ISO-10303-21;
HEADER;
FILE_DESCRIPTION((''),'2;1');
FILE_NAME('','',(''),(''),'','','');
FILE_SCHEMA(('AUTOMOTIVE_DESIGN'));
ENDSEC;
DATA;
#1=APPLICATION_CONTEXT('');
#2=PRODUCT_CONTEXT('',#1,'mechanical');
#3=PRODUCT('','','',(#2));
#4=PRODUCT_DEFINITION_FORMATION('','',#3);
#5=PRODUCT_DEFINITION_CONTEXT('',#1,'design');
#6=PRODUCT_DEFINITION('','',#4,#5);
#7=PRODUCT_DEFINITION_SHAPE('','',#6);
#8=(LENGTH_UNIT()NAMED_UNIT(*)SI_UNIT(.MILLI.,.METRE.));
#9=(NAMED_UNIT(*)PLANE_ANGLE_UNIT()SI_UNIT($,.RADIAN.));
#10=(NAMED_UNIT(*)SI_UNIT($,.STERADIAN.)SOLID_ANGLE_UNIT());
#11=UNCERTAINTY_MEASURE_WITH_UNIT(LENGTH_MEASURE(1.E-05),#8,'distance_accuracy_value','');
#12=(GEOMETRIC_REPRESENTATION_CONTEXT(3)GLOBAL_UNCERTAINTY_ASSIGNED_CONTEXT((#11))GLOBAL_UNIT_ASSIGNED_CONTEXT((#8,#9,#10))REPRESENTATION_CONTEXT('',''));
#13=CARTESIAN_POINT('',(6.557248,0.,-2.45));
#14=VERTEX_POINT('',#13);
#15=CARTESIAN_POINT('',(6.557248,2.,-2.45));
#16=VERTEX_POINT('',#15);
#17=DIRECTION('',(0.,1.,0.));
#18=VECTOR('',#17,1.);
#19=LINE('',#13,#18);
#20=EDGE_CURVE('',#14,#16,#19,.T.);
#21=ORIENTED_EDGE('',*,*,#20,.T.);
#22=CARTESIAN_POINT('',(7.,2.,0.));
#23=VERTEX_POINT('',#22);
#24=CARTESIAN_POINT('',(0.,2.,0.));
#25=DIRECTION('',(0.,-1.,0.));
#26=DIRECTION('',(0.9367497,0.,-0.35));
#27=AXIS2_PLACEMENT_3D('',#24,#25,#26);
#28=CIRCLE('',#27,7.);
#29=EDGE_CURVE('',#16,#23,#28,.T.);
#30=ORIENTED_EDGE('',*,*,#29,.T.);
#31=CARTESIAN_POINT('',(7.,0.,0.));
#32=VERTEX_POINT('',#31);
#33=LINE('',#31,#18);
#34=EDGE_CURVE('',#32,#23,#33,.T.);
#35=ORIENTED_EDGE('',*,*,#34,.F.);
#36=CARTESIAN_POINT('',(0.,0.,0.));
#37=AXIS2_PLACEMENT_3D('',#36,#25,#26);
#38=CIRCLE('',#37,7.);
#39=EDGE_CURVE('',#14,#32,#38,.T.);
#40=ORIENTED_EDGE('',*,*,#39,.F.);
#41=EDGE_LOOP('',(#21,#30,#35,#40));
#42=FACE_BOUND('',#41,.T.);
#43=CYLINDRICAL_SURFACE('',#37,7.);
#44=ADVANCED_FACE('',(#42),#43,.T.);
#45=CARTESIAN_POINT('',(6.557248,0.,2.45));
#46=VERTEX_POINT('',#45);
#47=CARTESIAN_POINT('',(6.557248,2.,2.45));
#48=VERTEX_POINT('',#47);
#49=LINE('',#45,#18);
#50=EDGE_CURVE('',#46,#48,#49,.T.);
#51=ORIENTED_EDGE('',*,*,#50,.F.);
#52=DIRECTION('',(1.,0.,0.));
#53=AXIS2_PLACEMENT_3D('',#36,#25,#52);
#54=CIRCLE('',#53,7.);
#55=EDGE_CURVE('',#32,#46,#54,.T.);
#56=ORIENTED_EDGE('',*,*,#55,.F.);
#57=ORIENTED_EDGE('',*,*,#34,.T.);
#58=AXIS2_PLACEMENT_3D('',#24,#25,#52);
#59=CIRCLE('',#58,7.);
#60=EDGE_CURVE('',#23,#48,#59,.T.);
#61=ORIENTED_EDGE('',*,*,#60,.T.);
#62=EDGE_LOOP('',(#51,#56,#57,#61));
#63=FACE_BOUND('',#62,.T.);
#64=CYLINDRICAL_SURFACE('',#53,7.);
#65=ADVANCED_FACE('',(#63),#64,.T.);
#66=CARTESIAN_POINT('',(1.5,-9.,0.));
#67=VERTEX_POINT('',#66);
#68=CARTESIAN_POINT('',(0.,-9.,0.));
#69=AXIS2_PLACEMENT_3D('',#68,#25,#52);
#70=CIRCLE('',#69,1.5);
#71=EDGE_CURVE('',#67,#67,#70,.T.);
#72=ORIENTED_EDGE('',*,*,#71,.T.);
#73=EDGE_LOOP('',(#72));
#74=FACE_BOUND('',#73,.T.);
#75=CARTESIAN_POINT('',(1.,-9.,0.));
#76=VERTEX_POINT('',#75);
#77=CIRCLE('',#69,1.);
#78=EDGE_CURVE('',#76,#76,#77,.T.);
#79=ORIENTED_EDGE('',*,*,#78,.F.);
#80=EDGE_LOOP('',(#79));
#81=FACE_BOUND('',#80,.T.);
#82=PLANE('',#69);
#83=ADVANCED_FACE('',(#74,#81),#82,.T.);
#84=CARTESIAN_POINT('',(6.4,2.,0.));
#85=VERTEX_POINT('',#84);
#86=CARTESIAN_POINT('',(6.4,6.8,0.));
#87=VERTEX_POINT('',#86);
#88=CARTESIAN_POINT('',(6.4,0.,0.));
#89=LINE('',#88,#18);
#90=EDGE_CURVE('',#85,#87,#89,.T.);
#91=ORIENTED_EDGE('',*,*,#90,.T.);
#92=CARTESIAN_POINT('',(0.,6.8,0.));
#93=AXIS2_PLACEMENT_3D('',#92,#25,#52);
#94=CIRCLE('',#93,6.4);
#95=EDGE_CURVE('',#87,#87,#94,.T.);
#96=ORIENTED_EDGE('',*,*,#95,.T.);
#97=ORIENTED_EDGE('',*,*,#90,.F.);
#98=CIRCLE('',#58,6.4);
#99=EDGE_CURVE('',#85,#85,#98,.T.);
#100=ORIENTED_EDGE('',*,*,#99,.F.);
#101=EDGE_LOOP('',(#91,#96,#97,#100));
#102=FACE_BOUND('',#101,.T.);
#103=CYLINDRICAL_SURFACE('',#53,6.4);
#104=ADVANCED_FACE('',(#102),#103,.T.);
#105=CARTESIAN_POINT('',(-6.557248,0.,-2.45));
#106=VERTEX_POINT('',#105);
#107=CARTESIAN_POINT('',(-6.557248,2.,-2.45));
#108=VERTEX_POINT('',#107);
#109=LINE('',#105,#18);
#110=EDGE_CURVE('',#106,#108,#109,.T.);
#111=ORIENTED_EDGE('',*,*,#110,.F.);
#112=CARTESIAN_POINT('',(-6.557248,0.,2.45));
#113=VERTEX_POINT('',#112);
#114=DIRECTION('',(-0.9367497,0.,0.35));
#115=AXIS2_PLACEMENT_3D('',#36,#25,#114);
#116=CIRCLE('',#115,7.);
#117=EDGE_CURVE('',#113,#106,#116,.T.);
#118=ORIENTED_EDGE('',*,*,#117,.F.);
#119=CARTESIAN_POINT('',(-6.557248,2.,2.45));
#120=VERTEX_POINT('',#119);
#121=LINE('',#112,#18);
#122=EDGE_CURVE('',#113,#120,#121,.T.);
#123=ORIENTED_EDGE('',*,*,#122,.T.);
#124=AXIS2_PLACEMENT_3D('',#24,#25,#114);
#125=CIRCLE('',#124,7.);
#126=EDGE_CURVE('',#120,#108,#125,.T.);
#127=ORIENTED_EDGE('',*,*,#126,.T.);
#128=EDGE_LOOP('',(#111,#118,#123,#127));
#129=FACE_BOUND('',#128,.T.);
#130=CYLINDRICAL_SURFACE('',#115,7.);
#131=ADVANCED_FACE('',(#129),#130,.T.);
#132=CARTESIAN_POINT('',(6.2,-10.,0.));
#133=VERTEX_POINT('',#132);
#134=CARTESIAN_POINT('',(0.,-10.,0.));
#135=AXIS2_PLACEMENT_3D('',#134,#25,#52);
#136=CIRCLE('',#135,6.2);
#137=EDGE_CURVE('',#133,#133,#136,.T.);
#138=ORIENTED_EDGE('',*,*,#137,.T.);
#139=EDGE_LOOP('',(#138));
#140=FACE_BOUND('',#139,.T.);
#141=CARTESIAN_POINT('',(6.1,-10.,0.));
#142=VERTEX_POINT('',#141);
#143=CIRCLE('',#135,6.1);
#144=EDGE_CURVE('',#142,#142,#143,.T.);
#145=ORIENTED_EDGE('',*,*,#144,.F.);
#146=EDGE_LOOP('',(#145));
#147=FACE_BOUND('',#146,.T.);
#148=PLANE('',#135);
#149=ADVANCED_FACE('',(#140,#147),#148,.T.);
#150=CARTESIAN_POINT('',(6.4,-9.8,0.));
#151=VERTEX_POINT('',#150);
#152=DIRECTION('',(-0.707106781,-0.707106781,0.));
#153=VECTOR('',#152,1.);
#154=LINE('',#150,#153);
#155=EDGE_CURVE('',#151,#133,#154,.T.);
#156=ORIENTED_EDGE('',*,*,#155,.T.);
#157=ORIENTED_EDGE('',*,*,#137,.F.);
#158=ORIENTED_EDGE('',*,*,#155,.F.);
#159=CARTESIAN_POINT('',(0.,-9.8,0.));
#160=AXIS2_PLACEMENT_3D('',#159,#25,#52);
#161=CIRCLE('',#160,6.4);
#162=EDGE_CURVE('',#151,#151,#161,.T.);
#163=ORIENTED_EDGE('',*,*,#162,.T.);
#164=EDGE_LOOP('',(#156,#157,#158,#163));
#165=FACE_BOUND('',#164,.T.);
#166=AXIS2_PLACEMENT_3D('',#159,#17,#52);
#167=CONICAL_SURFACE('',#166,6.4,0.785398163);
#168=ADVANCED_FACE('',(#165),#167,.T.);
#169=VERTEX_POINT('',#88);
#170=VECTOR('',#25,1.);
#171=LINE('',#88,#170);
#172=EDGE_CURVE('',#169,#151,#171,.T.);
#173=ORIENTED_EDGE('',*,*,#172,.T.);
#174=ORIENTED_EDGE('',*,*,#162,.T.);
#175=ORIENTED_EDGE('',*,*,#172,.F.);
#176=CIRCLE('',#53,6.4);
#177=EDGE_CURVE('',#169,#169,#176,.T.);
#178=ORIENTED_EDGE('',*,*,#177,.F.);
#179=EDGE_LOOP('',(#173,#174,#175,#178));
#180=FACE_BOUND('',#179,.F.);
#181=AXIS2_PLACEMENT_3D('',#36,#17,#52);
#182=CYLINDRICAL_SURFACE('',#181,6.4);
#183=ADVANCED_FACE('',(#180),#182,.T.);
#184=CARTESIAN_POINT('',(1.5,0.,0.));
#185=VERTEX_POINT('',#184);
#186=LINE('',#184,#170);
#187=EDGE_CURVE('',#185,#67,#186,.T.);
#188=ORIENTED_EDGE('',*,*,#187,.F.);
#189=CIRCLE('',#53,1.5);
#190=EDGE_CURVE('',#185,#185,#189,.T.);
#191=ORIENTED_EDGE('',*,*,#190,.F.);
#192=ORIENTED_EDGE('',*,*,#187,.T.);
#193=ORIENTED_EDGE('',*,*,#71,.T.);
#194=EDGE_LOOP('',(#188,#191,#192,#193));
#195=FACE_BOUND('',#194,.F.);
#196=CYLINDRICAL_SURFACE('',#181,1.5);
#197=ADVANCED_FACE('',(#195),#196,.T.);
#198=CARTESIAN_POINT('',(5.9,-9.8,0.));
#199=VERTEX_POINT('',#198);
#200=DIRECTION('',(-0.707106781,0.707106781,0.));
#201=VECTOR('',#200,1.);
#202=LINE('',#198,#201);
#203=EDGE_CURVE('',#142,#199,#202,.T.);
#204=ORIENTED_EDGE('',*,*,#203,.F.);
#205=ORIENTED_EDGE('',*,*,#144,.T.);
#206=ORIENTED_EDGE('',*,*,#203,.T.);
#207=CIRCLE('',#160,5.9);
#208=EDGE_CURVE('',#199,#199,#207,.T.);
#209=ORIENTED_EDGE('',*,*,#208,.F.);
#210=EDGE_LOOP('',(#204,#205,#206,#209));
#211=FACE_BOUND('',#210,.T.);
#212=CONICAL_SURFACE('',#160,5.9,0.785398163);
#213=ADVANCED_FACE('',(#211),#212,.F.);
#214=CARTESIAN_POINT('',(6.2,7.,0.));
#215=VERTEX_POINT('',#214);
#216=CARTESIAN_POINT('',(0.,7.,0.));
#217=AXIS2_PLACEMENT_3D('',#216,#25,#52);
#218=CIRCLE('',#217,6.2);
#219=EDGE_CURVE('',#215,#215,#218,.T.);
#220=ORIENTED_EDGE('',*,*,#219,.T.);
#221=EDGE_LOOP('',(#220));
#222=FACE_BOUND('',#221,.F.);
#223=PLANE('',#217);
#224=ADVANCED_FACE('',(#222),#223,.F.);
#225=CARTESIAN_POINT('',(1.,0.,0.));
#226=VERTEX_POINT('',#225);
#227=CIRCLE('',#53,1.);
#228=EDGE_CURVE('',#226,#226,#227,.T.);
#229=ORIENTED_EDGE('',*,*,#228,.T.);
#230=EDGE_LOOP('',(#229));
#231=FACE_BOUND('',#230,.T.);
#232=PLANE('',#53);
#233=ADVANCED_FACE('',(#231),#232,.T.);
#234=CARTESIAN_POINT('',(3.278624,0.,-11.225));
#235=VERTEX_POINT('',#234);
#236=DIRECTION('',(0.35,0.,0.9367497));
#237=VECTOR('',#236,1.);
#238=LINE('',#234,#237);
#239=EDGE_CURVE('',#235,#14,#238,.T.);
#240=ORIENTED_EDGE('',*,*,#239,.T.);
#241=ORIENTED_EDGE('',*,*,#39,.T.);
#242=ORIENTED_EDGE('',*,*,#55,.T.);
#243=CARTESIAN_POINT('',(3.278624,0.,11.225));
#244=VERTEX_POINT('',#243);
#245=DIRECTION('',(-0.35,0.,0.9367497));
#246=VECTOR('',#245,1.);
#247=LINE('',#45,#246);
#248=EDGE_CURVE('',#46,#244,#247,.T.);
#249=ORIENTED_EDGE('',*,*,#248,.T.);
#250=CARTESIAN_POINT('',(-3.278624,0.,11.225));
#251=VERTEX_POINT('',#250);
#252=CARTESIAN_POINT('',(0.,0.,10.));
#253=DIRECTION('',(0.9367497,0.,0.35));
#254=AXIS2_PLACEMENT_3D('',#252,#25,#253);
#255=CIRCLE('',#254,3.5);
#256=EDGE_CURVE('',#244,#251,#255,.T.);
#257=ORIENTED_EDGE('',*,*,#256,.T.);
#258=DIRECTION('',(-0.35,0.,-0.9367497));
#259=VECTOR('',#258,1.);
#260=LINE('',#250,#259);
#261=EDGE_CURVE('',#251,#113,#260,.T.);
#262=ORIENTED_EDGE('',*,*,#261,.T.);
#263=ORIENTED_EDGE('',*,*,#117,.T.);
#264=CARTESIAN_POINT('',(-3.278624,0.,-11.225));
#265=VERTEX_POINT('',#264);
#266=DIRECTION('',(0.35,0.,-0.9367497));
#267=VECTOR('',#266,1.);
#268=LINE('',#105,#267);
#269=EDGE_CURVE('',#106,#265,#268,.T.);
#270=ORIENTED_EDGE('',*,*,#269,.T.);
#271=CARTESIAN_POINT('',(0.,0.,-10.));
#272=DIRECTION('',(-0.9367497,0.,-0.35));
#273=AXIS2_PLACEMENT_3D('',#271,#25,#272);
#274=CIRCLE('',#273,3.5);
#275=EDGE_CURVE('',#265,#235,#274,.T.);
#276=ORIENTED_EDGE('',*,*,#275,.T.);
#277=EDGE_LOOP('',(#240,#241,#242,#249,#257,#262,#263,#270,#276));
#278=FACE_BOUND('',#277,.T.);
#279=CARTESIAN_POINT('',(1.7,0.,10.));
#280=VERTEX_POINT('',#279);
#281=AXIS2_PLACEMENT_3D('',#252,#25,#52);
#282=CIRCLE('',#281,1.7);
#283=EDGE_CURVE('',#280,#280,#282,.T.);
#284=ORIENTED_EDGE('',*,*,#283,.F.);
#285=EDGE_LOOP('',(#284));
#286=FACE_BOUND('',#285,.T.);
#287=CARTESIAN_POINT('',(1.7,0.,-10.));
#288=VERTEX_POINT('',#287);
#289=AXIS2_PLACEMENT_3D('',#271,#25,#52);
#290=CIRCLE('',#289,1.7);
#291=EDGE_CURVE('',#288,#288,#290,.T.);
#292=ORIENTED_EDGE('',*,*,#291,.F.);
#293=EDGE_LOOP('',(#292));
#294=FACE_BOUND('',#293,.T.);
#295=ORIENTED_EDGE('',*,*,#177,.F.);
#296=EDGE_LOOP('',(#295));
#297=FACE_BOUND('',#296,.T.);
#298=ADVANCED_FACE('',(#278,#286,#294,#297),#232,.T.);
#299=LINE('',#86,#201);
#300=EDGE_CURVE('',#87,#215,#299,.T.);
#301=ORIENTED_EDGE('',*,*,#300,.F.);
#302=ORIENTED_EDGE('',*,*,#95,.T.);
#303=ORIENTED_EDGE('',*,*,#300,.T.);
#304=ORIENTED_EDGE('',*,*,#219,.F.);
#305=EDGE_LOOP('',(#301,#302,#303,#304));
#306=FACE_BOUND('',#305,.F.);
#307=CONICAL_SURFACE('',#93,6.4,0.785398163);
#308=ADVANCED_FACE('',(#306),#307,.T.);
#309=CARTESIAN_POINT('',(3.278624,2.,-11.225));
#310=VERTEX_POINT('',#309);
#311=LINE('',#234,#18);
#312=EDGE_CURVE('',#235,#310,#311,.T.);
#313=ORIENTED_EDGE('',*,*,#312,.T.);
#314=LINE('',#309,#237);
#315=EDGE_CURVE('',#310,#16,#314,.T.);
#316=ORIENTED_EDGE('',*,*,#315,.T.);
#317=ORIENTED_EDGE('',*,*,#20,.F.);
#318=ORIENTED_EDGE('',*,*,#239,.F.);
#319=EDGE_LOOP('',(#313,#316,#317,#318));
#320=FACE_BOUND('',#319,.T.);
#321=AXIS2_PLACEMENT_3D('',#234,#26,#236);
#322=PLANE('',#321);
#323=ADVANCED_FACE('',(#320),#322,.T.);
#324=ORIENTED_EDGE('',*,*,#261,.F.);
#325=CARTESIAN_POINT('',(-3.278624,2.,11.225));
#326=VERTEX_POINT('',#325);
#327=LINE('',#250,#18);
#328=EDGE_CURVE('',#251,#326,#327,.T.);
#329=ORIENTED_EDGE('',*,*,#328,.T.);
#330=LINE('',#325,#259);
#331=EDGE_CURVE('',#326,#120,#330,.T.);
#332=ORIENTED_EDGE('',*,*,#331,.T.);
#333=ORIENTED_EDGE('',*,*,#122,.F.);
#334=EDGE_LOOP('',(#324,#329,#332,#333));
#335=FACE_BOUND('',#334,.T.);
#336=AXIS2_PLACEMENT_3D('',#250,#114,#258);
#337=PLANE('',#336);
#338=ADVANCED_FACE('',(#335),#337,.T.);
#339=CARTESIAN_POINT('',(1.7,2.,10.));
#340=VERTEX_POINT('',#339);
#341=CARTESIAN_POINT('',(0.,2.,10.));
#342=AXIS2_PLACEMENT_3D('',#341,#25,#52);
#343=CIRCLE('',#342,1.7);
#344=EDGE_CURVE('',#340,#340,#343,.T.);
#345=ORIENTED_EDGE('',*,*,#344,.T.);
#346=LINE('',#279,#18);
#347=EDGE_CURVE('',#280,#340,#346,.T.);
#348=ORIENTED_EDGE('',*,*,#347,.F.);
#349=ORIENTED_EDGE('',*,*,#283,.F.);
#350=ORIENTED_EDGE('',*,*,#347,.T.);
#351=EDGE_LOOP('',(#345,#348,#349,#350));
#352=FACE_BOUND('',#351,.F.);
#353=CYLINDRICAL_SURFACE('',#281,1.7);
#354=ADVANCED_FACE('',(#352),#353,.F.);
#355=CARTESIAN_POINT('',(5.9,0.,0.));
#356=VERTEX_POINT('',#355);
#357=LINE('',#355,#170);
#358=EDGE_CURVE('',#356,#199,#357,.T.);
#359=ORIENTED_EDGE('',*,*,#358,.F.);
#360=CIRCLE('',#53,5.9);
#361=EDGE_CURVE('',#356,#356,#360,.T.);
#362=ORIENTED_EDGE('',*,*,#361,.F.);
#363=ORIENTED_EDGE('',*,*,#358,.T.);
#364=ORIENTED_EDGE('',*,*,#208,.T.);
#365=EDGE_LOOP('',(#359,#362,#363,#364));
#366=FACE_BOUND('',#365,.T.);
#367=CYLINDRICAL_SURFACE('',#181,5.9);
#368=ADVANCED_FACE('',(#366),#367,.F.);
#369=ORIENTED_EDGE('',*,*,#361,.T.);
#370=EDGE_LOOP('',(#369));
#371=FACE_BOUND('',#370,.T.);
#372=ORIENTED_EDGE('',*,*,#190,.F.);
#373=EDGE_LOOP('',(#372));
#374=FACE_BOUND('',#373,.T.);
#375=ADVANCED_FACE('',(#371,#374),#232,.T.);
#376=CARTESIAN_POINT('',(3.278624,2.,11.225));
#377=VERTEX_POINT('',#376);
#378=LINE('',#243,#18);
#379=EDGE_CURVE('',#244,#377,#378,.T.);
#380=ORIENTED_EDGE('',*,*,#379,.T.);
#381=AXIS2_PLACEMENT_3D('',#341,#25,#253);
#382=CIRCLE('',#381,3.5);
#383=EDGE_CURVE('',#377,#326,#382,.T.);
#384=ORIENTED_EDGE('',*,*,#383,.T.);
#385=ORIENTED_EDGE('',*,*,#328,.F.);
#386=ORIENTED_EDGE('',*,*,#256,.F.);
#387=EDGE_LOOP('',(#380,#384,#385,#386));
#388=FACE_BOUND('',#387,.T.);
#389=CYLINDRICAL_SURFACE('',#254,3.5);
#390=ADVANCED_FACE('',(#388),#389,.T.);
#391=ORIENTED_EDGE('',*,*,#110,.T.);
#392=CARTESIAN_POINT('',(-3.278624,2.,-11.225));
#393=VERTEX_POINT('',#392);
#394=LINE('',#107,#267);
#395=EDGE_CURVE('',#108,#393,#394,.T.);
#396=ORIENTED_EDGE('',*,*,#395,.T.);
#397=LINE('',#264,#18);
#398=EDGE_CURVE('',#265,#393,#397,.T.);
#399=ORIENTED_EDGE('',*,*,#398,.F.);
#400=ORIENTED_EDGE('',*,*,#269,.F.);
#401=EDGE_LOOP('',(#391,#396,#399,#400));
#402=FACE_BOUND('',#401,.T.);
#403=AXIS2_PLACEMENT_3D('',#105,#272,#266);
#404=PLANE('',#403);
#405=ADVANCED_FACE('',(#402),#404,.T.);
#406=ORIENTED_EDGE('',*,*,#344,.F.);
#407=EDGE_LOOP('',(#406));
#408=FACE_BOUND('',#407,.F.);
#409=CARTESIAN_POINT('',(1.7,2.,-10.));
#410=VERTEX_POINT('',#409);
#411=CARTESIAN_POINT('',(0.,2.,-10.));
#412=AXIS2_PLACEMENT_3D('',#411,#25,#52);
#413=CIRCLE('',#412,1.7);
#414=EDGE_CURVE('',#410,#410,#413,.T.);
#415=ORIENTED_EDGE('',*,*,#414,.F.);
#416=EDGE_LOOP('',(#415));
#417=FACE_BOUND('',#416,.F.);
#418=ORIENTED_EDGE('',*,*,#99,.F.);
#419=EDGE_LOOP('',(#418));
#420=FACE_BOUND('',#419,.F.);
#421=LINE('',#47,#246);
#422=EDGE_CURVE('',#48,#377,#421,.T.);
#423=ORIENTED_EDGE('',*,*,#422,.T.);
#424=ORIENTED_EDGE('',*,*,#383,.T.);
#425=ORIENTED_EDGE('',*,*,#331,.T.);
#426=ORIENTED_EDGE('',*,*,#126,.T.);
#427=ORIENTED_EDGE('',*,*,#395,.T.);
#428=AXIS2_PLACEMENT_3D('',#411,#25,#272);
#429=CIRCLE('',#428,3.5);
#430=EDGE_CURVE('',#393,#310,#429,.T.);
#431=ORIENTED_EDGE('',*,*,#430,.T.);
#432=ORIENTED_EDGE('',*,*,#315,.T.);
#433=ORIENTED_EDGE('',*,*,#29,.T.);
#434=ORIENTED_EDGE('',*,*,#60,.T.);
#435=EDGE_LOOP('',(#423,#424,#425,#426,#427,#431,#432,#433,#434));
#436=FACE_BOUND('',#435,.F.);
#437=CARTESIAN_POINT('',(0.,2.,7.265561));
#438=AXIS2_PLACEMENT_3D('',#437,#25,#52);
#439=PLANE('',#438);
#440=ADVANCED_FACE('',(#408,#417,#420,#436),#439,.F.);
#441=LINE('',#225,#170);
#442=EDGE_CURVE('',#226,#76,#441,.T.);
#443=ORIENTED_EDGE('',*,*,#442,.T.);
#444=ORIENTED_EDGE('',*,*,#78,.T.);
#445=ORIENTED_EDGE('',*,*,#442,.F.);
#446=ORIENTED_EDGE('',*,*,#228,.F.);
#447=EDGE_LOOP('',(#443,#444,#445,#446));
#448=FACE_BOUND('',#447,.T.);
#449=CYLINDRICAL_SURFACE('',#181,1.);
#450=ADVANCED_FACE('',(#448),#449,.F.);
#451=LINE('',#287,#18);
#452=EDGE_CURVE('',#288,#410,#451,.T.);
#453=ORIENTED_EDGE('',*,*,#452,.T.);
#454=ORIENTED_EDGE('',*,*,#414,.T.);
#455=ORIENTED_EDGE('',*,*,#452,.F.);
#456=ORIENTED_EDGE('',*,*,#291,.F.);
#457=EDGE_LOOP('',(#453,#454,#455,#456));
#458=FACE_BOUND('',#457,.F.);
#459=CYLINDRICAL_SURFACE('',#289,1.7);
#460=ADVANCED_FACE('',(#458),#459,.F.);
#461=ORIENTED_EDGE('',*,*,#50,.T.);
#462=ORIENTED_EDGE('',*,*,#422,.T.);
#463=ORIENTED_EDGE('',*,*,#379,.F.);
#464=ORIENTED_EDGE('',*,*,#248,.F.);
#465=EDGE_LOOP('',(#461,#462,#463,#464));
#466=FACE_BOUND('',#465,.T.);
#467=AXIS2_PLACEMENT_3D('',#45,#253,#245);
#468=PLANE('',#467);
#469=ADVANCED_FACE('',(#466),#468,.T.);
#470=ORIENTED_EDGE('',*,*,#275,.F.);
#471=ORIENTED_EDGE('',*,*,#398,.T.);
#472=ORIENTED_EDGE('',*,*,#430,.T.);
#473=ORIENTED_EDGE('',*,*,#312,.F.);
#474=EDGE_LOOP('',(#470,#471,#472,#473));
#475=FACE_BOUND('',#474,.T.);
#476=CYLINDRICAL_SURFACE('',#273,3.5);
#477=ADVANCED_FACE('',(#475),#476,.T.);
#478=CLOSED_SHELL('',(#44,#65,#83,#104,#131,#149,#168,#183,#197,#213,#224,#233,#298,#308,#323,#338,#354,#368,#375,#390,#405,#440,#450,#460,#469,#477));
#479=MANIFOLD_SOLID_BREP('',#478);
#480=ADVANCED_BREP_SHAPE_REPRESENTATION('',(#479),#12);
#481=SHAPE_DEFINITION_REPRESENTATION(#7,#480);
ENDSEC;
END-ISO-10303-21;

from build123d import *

# Parameters (mm, degrees)
F0_R     = 1.7
F0_R_2   = 6.4
F0_R_3   = 5.9
F0_R_4   = 1.5
F0_R_5   = 1
F1_DEPTH = 2
F2_DEPTH = 7
F3_DEPTH = 10
F4_DEPTH = 9
F6_SIZE  = 0.2


# Not quite as in the source:
# - the program builds the solid bodies; features that only make, move or delete a surface that nothing else refers to are left out


with BuildPart() as f1:
    # F0 (on Front) → F1 (new body)
    with BuildSketch(Plane.XZ):
        with BuildLine():
            Line((6.5572478983, 2.45), (3.2786239492, 11.225))
            ThreePointArc((3.2786239492, 11.225), (0, 13.5), (-3.2786239492, 11.225))
            Line((-3.2786239492, 11.225), (-6.5572478983, 2.45))
            ThreePointArc((-6.5572478983, 2.45), (0, 7), (6.5572478983, 2.45))
        make_face()
        with Locations((0, 10)):
            Circle(F0_R, mode=Mode.SUBTRACT)
        with BuildLine():
            ThreePointArc((6.5572478983, -2.45), (0, -7), (-6.5572478983, -2.45))
            Line((-6.5572478983, -2.45), (-3.2786239492, -11.225))
            ThreePointArc((-3.2786239492, -11.225), (0, -13.5), (3.2786239492, -11.225))
            Line((3.2786239492, -11.225), (6.5572478983, -2.45))
        make_face()
        with Locations((0, -10)):
            Circle(F0_R, mode=Mode.SUBTRACT)
        with BuildLine():
            ThreePointArc((7, 0), (6.8884227254, 1.2448423016), (6.5572478983, 2.45))
            ThreePointArc((6.5572478983, 2.45), (0, 7), (-6.5572478983, 2.45))
            ThreePointArc((-6.5572478983, 2.45), (-7, 0), (-6.5572478983, -2.45))
            ThreePointArc((-6.5572478983, -2.45), (0, -7), (6.5572478983, -2.45))
            ThreePointArc((6.5572478983, -2.45), (6.8884227254, -1.2448423016), (7, 0))
        make_face()
        Circle(F0_R_2, mode=Mode.SUBTRACT)
        Circle(F0_R_2)
        Circle(F0_R_3, mode=Mode.SUBTRACT)
        Circle(F0_R_3)
        Circle(F0_R_4, mode=Mode.SUBTRACT)
        Circle(F0_R_4)
        Circle(F0_R_5, mode=Mode.SUBTRACT)
        Circle(F0_R_5)
    extrude(amount=-F1_DEPTH)

    # F0 (on Front) → F2 (join)
    with BuildSketch(Plane.XZ):
        Circle(F0_R_2)
        Circle(F0_R_3, mode=Mode.SUBTRACT)
        Circle(F0_R_3)
        Circle(F0_R_4, mode=Mode.SUBTRACT)
        Circle(F0_R_4)
        Circle(F0_R_5, mode=Mode.SUBTRACT)
        Circle(F0_R_5)
    extrude(amount=-F2_DEPTH)

    # F0 (on Front) → F3 (join)
    with BuildSketch(Plane.XZ):
        Circle(F0_R_2)
        Circle(F0_R_3, mode=Mode.SUBTRACT)
    extrude(amount=F3_DEPTH)

    # F0 (on Front) → F4 (join)
    with BuildSketch(Plane.XZ):
        Circle(F0_R_4)
        Circle(F0_R_5, mode=Mode.SUBTRACT)
    extrude(amount=F4_DEPTH)

    # F6
    f6_edges = [f1.edges().sort_by_distance(p)[0] for p in [
        (-6.4, -10, 0),
        (-5.9, -10, 0),
        (-6.4, 7, 0),
    ]]
    chamfer(f6_edges, length=F6_SIZE)


solid = f1.part
